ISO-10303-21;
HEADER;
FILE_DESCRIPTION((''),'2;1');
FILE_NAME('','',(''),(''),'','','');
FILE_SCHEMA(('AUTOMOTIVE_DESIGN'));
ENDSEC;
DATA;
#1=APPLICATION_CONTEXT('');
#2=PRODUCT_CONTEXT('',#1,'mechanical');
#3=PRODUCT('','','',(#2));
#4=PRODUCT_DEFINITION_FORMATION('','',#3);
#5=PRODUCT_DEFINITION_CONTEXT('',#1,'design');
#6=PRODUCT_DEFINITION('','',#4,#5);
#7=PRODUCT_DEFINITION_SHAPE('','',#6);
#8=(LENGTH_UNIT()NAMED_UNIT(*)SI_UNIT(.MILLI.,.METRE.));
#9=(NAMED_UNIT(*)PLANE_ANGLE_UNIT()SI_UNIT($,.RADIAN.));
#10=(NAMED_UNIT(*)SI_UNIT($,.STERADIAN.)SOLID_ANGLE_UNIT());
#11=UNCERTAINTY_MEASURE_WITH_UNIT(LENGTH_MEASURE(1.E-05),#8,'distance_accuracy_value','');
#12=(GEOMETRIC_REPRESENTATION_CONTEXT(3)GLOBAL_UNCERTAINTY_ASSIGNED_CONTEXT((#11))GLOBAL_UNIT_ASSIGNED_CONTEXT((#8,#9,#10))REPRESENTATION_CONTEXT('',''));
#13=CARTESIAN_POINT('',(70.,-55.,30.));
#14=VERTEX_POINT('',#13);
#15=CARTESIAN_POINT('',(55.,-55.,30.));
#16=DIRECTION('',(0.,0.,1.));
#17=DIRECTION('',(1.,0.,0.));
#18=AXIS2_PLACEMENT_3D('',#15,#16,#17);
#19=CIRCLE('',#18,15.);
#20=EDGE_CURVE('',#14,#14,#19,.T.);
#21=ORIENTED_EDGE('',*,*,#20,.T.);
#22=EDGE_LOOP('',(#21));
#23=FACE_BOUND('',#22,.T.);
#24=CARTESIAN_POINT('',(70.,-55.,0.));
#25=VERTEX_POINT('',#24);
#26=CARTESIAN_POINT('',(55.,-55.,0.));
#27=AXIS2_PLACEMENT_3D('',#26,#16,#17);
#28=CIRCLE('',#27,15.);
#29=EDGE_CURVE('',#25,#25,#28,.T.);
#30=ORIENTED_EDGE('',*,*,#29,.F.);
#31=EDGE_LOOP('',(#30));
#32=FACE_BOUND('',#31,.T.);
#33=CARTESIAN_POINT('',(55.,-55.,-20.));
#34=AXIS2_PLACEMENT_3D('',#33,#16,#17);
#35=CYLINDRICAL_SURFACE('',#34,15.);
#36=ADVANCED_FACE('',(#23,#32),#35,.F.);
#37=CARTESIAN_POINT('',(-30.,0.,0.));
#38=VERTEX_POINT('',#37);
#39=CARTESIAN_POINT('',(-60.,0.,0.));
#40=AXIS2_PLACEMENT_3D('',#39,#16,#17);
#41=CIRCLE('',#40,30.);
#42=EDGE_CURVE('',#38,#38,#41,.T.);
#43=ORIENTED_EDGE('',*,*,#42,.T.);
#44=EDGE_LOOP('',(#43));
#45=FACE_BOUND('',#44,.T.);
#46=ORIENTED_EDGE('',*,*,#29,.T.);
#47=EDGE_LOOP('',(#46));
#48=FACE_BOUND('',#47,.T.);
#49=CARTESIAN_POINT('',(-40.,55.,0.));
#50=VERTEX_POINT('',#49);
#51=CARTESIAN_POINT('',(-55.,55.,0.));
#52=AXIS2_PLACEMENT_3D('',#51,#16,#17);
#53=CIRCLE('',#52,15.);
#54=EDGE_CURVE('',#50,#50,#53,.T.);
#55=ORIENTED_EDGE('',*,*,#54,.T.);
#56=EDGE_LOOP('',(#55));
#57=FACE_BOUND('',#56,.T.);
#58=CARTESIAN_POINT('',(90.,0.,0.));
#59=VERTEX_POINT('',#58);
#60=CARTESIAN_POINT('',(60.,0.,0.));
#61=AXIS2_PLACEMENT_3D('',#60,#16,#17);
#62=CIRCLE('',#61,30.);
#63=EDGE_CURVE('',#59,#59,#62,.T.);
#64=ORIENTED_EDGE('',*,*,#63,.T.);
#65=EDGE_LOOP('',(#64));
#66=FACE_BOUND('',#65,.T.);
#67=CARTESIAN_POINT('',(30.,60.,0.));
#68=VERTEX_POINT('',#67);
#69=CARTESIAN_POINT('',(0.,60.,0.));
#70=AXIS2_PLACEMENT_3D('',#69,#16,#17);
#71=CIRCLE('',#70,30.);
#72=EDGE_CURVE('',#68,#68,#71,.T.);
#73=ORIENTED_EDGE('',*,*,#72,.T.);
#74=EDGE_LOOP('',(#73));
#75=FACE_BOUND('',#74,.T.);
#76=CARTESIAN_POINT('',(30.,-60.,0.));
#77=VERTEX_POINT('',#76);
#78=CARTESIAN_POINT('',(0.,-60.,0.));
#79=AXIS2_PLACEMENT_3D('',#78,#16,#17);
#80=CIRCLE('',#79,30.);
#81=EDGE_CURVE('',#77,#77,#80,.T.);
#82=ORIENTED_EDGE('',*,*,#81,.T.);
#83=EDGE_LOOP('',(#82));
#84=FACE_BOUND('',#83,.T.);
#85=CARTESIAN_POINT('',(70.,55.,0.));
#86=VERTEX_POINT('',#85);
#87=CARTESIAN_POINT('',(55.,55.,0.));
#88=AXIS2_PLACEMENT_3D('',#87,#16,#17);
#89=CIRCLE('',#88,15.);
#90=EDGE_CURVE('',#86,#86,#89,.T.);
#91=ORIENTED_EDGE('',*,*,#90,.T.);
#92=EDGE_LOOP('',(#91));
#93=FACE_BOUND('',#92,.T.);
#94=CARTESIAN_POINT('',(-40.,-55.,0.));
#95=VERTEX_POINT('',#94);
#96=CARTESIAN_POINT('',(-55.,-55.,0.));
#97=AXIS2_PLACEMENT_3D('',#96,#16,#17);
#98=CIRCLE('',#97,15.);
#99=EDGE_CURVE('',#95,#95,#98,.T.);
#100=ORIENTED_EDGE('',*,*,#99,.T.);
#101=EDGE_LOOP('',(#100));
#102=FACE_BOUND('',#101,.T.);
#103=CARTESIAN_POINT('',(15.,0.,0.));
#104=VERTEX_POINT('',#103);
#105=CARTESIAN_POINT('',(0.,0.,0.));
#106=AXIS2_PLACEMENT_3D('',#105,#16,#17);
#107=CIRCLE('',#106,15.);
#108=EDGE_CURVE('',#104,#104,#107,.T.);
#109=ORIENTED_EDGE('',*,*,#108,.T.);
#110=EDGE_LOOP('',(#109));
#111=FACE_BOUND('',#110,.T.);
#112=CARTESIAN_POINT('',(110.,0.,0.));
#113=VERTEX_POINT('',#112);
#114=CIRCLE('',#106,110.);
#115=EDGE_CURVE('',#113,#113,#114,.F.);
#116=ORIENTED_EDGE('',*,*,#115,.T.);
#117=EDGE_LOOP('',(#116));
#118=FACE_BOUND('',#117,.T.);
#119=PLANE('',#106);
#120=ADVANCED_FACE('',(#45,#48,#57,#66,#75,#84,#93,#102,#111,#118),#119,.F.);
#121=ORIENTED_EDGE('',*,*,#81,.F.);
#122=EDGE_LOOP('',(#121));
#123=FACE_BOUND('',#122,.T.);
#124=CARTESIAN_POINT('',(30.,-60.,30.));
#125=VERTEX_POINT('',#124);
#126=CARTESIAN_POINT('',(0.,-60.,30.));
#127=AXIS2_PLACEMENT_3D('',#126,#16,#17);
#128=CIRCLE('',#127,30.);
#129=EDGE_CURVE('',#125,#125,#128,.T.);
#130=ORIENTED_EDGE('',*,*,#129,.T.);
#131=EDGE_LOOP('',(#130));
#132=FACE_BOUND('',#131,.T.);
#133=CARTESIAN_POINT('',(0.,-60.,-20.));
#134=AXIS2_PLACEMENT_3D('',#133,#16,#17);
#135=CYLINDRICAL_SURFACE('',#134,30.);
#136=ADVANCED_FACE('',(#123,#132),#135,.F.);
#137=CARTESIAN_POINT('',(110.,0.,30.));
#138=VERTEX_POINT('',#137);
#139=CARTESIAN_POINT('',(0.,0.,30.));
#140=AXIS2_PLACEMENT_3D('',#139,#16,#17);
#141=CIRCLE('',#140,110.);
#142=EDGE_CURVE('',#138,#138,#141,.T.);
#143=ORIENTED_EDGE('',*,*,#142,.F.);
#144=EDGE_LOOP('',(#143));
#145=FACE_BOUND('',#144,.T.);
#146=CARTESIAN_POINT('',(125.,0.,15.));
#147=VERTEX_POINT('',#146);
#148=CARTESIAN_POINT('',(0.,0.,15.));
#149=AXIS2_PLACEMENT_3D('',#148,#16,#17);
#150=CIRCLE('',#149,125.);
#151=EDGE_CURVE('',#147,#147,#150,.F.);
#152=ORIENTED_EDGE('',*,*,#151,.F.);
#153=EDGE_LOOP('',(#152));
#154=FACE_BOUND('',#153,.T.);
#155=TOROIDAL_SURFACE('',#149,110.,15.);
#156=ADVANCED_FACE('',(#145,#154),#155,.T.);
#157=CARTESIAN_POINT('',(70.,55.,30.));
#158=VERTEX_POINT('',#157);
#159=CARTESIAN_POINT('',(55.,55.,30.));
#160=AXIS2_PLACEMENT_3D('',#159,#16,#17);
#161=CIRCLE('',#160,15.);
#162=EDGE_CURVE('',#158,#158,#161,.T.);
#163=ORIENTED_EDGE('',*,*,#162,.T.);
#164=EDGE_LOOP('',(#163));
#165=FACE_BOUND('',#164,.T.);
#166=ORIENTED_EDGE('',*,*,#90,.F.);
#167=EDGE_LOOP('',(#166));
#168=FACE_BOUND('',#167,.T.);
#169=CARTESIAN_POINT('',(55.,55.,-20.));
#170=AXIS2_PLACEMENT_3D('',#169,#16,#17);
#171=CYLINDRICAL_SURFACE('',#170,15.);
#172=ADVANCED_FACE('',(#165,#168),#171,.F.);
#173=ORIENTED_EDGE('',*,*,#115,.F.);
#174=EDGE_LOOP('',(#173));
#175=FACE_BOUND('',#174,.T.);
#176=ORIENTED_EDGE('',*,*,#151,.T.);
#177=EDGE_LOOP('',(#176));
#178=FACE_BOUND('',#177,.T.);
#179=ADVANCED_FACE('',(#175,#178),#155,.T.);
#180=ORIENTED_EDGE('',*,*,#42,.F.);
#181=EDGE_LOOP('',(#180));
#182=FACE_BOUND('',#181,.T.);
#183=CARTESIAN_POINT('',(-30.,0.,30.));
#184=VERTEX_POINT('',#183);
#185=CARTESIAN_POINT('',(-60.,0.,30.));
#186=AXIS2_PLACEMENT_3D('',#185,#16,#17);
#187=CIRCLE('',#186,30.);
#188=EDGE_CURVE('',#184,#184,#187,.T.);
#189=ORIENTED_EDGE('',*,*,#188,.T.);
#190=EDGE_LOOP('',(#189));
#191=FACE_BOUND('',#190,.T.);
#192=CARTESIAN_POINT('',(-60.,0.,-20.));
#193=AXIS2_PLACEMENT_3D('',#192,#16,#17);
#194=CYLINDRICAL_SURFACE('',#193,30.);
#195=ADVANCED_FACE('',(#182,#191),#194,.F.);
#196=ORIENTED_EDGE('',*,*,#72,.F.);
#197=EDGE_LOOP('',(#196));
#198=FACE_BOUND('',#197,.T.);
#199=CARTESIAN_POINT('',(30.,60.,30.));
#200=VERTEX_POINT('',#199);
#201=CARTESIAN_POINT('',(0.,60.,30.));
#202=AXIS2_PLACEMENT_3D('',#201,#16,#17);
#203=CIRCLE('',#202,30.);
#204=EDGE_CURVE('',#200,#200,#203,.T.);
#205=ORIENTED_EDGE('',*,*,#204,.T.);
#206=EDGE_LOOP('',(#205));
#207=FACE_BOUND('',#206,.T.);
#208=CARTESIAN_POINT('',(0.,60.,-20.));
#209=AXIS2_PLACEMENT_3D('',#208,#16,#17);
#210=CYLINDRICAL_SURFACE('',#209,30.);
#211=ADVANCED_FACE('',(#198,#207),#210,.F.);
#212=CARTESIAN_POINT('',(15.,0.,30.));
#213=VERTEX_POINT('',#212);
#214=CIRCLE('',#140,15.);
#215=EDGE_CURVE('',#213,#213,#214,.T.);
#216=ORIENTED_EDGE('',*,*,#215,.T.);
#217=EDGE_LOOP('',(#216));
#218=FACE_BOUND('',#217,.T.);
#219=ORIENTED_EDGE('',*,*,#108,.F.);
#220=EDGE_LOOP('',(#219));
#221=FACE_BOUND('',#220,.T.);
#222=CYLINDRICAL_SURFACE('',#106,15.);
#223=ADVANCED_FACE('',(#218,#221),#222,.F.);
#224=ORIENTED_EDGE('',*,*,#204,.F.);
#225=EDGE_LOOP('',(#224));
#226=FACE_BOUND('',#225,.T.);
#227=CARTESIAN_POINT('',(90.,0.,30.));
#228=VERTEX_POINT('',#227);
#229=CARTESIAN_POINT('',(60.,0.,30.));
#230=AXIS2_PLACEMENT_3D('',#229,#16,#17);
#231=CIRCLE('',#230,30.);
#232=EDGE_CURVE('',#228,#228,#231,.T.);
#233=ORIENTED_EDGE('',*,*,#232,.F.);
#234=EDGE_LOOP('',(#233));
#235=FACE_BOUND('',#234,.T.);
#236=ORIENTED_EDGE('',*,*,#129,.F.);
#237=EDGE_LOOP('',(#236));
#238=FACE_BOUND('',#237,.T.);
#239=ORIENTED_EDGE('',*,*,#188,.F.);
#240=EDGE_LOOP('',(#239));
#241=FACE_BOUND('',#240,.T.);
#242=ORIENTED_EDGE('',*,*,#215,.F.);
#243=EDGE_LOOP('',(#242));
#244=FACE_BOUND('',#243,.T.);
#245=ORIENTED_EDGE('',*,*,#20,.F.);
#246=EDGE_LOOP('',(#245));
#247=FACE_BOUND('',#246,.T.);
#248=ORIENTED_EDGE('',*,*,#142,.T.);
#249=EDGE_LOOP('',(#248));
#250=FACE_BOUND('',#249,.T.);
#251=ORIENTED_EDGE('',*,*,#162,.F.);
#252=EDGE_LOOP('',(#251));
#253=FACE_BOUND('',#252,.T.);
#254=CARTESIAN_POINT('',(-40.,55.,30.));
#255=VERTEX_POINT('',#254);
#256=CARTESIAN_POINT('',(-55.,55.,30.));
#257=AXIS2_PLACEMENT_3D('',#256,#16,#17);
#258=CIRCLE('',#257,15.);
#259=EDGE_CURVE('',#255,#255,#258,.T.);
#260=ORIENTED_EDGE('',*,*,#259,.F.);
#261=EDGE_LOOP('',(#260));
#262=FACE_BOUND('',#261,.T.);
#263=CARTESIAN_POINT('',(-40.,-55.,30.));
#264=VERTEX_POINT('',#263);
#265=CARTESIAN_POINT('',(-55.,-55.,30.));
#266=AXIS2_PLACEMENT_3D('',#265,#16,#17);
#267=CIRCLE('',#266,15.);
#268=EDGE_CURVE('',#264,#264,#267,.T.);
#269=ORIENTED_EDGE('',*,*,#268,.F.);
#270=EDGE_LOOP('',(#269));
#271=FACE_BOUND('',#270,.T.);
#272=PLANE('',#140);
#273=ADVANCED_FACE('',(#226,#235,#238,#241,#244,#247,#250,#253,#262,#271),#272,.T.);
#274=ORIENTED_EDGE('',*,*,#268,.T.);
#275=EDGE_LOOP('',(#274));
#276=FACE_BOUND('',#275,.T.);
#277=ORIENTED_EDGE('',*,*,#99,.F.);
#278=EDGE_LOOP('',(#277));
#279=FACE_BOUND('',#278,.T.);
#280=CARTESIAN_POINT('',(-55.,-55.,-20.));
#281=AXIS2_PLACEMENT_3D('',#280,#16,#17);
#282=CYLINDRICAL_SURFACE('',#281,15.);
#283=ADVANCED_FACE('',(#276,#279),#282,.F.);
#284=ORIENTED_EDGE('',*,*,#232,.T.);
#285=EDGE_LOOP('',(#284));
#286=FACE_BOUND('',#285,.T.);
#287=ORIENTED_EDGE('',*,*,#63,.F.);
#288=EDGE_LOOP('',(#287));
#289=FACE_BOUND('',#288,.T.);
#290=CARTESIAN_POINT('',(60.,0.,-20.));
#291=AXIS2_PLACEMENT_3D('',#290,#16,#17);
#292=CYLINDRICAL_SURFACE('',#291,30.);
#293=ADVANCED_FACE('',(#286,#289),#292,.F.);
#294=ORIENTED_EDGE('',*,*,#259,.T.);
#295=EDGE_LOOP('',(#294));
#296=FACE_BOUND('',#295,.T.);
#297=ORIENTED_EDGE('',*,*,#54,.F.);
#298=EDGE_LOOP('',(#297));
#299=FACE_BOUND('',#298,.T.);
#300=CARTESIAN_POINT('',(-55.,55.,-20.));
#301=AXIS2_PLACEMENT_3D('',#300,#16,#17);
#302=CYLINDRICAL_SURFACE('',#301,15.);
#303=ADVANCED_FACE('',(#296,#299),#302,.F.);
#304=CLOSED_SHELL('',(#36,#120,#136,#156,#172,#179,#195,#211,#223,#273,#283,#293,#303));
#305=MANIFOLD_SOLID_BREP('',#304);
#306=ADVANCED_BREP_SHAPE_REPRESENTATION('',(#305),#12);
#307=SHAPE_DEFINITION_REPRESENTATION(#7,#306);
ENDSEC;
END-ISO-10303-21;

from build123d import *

# Parameters (mm, degrees)
SKETCH1_R           = 125
BOSS_EXTRUDE1_DEPTH = 30
FILLET1_R           = 15
SKETCH2_R           = 15
CUT_EXTRUDE1_DEPTH  = 30
SKETCH3_R           = 30
SKETCH3_R_2         = 15
CUT_EXTRUDE2_DEPTH  = 50


with BuildPart() as part:
    # Sketch1 → Boss-Extrude1 (new body)
    with BuildSketch(Plane.XY):
        Circle(SKETCH1_R)
    extrude(amount=BOSS_EXTRUDE1_DEPTH)

    # Fillet1
    fillet1_edges = [part.edges().sort_by_distance(p)[0] for p in [
        (-125, 0, 0),
        (-125, 0, 30),
    ]]
    fillet(fillet1_edges, radius=FILLET1_R - 0.0001)  # a hair under: the kernel refuses the full size

    # Sketch2 → Cut-Extrude1 (cut)
    with BuildSketch(Plane.XY.offset(30)):
        Circle(SKETCH2_R)
    extrude(amount=-CUT_EXTRUDE1_DEPTH, mode=Mode.SUBTRACT)

    # Sketch3 → Cut-Extrude2 (cut)
    with BuildSketch(Plane.XY.offset(30)):
        with Locations((0, 60)):
            Circle(SKETCH3_R)
        with Locations((-60, 0)):
            Circle(SKETCH3_R)
        with Locations((0, -60)):
            Circle(SKETCH3_R)
        with Locations((60, 0)):
            Circle(SKETCH3_R)
        with Locations((55, -55)):
            Circle(SKETCH3_R_2)
        with Locations((-55, -55)):
            Circle(SKETCH3_R_2)
        with Locations((-55, 55)):
            Circle(SKETCH3_R_2)
        with Locations((55, 55)):
            Circle(SKETCH3_R_2)
    extrude(amount=-CUT_EXTRUDE2_DEPTH, mode=Mode.SUBTRACT)


solid = part.part
